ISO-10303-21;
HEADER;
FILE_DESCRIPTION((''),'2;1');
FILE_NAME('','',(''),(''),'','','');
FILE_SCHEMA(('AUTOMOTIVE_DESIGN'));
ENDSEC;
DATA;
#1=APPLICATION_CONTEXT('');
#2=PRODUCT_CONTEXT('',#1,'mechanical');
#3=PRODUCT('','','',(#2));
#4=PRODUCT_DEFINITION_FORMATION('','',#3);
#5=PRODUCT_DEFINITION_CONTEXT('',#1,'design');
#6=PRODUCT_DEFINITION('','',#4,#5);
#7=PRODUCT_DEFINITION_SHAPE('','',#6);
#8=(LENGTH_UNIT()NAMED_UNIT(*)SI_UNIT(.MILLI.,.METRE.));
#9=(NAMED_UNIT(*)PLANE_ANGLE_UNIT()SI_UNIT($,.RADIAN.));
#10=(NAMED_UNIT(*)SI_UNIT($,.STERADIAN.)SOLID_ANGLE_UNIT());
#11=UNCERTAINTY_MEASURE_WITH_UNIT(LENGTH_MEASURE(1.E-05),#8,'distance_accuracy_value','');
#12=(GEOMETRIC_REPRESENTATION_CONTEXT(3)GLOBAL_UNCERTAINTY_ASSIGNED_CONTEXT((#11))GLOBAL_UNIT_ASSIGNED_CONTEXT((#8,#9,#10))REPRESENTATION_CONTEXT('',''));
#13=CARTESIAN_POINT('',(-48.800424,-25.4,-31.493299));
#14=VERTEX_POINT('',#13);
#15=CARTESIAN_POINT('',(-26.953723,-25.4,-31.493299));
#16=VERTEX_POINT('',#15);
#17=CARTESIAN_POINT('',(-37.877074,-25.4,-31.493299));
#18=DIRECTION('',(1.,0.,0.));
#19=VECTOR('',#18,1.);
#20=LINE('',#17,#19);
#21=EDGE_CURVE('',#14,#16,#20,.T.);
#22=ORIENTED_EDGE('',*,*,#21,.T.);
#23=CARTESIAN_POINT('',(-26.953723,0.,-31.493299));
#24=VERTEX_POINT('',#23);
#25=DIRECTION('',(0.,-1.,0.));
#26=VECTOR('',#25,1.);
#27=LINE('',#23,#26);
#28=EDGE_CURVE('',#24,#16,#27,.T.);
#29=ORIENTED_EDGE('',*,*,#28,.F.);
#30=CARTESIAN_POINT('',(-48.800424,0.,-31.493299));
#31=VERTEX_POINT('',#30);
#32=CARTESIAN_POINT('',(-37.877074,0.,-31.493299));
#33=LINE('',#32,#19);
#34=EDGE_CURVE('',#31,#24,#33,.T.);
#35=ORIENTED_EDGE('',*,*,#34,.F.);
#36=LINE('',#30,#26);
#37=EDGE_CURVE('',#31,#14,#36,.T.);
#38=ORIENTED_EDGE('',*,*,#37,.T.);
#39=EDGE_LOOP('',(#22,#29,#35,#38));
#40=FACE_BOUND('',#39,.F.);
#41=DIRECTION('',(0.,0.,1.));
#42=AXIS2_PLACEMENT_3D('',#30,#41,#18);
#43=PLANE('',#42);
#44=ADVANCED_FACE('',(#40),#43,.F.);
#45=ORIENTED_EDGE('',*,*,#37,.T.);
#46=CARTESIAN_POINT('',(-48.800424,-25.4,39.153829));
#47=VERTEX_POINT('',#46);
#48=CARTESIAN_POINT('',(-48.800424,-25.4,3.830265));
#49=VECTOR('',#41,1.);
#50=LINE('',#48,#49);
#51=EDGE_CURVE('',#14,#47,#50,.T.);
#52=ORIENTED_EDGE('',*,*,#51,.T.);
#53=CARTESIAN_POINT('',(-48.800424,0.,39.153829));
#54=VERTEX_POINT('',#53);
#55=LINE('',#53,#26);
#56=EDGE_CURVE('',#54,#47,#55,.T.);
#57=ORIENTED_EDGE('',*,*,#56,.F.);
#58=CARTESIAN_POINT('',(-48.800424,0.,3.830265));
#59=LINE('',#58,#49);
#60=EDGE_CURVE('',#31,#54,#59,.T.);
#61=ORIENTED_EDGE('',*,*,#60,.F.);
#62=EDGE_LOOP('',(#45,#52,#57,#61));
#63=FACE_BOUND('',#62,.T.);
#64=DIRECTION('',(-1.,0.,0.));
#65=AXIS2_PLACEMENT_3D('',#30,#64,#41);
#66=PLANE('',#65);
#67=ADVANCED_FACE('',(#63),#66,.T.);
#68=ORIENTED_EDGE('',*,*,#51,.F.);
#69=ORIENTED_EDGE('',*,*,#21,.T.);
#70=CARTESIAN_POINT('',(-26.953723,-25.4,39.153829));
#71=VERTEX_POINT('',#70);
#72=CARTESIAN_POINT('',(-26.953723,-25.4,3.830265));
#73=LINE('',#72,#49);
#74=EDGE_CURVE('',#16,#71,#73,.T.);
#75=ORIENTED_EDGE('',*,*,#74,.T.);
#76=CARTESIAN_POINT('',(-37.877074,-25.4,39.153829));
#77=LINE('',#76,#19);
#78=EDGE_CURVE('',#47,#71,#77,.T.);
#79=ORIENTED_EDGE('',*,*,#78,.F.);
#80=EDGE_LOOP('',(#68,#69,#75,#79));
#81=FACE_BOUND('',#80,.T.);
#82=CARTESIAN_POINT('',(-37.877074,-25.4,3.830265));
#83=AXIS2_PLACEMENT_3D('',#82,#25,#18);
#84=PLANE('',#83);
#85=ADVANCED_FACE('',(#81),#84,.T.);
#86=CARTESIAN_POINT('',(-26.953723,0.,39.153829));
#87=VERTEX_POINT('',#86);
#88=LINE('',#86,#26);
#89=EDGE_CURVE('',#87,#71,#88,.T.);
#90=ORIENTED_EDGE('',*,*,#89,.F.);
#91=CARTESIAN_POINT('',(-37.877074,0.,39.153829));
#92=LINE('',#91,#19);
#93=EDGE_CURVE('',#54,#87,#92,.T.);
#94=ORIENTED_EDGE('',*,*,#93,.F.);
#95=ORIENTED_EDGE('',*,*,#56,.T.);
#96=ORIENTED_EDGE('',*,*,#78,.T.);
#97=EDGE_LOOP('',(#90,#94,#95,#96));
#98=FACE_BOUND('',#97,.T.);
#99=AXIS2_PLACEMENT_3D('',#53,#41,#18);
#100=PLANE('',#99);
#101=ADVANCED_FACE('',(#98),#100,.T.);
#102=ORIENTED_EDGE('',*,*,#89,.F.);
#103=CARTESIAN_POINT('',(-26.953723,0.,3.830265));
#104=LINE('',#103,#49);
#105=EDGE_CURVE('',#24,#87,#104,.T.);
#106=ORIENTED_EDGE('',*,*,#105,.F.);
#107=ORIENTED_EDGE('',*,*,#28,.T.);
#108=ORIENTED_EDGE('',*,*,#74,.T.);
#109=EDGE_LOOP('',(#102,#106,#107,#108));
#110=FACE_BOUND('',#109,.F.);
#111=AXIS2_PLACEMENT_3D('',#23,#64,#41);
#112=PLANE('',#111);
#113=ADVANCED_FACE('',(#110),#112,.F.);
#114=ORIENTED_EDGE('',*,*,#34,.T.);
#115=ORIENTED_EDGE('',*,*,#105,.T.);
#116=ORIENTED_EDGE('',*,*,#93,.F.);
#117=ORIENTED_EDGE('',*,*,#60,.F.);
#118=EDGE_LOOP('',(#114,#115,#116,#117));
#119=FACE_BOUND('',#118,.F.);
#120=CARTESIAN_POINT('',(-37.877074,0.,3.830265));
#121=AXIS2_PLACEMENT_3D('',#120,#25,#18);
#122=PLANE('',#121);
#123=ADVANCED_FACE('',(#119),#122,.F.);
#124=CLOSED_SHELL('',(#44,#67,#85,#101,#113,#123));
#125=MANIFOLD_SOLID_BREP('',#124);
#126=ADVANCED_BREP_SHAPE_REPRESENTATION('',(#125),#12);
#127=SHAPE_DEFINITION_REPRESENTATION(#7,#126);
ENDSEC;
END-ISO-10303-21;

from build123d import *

# Parameters (mm, degrees)
F0_W     = 21.8467004597
F0_H     = 70.6471279263
F1_DEPTH = 25.4


# Not quite as in the source:
# - a feature of the source that left no trace in its solid (it failed there, or was rolled back) is left out


with BuildPart() as f1:
    # F0 (on Front) → F1 (new body)
    with BuildSketch(Plane.XZ):
        with Locations((-37.8770735115, 3.8302652538)):
            Rectangle(F0_W, F0_H)
    extrude(amount=F1_DEPTH)


solid = f1.part
